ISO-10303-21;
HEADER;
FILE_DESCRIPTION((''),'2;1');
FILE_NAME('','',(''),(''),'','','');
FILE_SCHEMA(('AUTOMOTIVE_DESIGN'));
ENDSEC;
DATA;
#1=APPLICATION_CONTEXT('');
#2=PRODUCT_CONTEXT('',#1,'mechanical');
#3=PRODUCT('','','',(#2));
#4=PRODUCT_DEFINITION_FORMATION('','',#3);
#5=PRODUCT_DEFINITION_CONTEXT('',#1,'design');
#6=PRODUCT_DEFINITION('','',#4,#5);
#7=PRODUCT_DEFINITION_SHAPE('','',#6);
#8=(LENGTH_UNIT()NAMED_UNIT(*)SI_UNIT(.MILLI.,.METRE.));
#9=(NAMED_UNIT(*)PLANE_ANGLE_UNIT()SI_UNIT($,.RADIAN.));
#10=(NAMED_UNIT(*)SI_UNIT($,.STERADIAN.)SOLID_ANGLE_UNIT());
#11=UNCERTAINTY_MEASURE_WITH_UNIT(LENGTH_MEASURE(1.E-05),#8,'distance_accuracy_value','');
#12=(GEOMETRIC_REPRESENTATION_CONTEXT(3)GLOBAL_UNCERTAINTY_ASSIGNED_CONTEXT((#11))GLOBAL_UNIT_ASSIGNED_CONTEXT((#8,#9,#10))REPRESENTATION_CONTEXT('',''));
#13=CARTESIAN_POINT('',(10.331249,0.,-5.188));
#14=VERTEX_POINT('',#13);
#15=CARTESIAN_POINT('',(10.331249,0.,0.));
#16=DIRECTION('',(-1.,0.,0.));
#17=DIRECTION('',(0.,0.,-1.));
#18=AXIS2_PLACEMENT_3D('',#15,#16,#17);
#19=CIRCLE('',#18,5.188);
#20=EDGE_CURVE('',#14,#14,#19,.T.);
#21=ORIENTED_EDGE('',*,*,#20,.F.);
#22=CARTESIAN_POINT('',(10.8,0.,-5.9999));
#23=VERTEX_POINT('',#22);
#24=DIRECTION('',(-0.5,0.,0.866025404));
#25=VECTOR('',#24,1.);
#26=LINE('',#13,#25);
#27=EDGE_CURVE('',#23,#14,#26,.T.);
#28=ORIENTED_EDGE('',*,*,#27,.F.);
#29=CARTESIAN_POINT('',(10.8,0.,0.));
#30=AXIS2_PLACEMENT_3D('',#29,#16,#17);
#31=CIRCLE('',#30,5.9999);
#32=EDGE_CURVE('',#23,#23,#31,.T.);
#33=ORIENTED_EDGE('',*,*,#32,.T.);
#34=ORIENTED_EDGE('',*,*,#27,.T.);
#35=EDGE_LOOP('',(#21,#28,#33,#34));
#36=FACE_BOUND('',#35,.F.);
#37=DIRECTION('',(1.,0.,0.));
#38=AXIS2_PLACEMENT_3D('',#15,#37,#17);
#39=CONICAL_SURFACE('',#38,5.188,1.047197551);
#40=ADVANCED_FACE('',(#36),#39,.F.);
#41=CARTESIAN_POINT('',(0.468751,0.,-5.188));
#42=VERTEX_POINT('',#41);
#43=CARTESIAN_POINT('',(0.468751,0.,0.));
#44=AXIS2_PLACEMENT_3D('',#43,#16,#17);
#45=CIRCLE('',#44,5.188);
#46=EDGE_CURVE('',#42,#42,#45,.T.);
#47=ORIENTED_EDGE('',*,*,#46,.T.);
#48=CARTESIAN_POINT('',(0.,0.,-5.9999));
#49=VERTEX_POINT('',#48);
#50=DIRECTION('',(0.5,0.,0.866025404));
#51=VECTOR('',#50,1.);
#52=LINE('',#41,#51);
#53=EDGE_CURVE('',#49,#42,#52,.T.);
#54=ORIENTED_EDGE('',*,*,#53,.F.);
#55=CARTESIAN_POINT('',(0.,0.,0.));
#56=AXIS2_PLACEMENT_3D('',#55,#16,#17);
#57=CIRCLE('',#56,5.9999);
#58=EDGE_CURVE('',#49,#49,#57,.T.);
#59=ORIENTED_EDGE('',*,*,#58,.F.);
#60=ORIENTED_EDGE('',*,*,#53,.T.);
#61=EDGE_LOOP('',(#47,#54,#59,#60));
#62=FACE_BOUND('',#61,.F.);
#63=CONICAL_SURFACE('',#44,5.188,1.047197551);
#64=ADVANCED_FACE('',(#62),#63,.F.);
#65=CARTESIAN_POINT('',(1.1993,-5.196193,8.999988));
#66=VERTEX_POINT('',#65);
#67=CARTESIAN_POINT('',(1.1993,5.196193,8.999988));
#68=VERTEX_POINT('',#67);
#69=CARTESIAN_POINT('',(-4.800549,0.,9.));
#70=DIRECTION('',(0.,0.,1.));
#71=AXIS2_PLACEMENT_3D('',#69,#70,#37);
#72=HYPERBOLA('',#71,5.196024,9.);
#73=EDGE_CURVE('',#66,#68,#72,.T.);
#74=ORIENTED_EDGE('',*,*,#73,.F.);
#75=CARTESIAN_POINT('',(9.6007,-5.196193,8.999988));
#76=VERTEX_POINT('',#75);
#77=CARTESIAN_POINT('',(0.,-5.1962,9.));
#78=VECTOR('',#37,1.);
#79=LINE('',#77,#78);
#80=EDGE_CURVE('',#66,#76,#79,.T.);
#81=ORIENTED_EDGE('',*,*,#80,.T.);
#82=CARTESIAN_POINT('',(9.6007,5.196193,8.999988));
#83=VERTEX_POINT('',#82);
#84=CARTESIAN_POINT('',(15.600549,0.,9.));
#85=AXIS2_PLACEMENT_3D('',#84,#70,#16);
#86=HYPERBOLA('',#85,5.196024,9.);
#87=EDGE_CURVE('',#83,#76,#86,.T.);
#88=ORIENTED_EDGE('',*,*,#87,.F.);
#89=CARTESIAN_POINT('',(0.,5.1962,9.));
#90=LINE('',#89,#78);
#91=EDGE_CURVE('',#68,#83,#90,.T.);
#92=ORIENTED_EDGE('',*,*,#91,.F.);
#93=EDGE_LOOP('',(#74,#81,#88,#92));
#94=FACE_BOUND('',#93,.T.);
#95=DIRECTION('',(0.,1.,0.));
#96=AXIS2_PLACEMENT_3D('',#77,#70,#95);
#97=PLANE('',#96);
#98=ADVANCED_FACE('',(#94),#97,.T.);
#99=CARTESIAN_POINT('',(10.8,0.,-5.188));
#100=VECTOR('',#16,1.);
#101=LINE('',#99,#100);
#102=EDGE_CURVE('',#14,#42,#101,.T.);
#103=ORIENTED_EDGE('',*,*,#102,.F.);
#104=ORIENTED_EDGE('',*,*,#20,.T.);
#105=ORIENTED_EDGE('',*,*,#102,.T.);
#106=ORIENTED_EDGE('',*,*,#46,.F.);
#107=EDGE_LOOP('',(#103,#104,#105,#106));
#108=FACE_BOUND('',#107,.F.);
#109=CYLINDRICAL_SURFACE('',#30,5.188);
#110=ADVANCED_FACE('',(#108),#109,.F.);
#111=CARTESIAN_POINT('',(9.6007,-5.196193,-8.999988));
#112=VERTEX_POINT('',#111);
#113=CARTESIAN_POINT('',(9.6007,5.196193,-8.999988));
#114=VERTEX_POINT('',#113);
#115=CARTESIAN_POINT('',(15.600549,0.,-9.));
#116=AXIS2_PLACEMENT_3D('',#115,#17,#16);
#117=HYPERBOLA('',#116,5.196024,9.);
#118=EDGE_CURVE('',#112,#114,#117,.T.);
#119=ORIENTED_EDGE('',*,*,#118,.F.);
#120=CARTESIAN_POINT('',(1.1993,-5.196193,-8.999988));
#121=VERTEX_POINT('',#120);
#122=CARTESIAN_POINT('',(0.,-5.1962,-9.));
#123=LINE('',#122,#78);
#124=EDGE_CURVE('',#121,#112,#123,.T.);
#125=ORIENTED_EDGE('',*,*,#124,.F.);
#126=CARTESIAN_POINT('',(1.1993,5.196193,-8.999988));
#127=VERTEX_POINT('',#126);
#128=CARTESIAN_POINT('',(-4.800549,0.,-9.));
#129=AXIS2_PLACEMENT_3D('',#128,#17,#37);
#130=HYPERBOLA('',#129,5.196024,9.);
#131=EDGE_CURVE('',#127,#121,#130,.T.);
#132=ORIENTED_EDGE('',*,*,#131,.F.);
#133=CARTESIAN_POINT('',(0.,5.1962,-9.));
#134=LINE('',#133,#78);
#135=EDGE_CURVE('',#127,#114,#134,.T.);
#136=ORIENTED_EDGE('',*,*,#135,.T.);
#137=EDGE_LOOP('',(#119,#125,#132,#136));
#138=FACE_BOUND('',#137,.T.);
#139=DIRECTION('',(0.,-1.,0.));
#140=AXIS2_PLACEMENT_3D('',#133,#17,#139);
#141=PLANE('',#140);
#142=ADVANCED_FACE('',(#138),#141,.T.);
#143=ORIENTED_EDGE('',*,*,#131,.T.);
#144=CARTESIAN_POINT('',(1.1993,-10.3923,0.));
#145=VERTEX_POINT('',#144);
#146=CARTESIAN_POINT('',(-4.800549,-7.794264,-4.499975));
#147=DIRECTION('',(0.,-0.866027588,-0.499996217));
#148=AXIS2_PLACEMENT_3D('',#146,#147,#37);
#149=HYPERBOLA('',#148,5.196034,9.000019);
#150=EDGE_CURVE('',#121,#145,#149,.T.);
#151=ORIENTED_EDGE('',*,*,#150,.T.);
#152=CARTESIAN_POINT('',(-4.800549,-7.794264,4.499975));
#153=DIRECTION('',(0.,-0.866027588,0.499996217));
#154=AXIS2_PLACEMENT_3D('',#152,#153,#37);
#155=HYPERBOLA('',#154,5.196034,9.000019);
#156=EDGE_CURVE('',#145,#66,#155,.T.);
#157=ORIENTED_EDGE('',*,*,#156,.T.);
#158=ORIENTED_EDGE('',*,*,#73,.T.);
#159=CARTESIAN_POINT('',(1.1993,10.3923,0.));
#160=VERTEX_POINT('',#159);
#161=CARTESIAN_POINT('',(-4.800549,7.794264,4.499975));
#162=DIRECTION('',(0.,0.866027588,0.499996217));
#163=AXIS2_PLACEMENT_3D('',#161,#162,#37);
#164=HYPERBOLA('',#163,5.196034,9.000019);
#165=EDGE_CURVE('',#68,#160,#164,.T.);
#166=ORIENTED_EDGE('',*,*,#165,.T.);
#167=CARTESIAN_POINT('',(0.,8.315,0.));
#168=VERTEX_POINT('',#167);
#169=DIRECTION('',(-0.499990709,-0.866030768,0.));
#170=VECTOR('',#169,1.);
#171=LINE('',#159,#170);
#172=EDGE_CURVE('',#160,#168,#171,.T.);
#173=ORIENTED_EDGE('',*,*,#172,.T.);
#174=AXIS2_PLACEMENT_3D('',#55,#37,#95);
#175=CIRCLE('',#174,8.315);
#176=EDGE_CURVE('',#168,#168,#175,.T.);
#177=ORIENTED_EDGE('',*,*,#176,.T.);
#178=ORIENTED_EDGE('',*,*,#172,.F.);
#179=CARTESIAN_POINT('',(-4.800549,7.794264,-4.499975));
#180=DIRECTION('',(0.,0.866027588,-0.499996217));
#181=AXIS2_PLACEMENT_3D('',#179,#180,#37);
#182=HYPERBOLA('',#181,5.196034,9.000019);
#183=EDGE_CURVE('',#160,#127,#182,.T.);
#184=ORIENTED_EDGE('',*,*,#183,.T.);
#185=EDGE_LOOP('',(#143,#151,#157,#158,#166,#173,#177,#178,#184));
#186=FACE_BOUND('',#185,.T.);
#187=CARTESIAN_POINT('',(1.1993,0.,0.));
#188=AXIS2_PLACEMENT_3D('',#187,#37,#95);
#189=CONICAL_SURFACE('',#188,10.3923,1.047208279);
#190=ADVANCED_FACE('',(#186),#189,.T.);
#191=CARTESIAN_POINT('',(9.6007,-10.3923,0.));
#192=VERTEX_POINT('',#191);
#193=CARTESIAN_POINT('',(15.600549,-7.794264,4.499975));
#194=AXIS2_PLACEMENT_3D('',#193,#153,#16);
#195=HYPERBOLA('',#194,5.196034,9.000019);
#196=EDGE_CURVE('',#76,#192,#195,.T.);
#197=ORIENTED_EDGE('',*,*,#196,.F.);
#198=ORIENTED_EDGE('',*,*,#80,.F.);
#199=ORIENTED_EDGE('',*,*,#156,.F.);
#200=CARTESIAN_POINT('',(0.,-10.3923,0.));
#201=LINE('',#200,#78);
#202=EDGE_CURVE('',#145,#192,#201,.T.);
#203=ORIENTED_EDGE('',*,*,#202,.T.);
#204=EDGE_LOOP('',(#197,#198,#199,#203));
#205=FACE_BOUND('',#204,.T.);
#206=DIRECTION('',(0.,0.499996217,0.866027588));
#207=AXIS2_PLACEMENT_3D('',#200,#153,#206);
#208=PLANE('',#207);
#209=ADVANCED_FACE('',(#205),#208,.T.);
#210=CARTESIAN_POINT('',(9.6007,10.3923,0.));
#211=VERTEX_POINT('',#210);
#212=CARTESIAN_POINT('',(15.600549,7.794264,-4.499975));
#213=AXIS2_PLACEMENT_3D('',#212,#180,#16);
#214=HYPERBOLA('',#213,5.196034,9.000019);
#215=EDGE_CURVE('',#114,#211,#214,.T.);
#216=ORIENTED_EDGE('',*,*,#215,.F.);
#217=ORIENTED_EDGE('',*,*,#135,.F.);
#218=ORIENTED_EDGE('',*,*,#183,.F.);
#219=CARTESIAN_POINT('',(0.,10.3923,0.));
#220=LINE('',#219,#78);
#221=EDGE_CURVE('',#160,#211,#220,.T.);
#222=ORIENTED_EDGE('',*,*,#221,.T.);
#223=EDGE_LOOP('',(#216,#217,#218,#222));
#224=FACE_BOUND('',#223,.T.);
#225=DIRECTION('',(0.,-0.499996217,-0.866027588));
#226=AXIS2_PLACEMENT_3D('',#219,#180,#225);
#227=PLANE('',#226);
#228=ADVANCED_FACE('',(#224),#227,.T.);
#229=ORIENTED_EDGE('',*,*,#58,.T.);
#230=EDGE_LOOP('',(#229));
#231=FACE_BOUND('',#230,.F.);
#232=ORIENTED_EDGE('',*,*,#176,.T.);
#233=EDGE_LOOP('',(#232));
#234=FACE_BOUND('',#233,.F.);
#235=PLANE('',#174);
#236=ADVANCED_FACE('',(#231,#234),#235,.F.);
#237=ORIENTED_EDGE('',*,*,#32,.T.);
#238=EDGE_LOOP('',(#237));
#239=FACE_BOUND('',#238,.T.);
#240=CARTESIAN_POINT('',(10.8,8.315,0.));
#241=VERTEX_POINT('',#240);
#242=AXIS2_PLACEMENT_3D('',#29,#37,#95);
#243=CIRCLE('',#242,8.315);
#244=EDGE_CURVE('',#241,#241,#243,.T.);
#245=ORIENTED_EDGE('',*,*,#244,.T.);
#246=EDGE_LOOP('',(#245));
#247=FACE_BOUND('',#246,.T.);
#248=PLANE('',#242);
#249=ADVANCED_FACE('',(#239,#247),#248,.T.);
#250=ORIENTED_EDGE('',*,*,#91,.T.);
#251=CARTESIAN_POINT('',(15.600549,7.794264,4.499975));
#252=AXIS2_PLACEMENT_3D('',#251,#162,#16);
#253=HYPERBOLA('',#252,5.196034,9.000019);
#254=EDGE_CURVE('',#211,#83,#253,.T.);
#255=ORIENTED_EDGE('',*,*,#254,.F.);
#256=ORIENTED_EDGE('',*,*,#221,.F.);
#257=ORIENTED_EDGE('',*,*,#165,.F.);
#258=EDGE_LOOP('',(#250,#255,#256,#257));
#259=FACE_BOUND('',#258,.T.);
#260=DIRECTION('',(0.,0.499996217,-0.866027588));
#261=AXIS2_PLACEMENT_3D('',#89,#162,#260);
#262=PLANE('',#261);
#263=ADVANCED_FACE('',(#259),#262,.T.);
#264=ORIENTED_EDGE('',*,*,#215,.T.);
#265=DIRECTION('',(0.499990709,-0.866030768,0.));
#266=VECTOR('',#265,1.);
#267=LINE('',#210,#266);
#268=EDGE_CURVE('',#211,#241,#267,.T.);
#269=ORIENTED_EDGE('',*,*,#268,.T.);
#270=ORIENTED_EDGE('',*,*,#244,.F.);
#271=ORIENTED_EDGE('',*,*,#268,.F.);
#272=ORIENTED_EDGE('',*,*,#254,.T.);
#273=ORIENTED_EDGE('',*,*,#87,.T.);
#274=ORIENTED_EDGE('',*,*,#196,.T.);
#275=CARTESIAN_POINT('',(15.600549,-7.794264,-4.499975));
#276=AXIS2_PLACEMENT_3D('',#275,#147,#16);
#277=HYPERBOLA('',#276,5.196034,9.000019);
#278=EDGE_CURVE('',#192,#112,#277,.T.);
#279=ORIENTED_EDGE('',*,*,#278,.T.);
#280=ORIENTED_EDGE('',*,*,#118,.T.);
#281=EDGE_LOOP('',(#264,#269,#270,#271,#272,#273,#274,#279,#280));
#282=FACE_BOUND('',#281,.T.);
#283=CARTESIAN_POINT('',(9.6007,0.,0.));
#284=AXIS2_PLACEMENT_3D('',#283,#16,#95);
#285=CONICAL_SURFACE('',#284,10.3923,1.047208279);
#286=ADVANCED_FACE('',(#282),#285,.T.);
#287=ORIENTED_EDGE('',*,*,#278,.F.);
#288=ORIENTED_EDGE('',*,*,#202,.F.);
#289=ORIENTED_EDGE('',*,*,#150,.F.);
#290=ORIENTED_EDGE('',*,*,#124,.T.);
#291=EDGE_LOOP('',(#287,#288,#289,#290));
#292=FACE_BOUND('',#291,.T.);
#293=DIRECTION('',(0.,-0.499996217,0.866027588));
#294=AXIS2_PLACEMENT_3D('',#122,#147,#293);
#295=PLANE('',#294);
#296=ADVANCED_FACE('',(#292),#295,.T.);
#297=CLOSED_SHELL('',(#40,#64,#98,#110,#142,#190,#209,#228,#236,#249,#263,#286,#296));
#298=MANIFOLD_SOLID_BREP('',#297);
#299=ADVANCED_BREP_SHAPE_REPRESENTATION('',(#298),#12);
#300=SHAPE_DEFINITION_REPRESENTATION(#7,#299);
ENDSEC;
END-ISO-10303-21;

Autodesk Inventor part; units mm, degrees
ref_plane "YZ Plane" through (0, 0, 0) normal (1, 0, 0) x (0, 1, 0)
ref_plane "XZ Plane" through (0, 0, 0) normal (0, 1, 0) x (-1, 0, 0)
sketch "Эскиз1" plane through (0, 0, 0) normal (1, 0, 0) x (0, 1, 0)
  line L0 (-10.3923, 0) -> (-5.1962, 9)
  line L1 (-5.1962, 9) -> (5.1962, 9)
  line L2 (5.1962, 9) -> (10.3923, 0)
  line L3 (10.3923, 0) -> (5.1962, -9)
  line L4 (5.1962, -9) -> (-5.1962, -9)
  line L5 (-5.1962, -9) -> (-10.3923, 0)
  point P0 (0, 0)
  point P1 (0, 0)
  dimension "d0" = 20.7846
extrude "Базовый элемент" add sketch "Эскиз1" along normal blind 10.8
sketch "Эскиз2" plane through (0, 0, 0) normal (0, 0, 1) x (1, 0, 0)
  line L0 (0, 5.1962) -> (0, 10.3923) projected
  line L1 (0, 10.3923) -> (10.8, 10.3923) projected
  line L2 (10.8, 5.1962) -> (10.8, 10.3923) projected
  line L3 (-2.16, 0) -> (12.96, 0) projected
  line L4 (1.1993, 10.3923) -> (0, 8.315)
  line L5 (9.6007, 10.3923) -> (10.8, 8.315)
  dimension "d3" = 30
  dimension "d4" = 30
  dimension "d5" = 16.63
  dimension "d6" = 16.63
revolve "Фаска1" cut sketch "Эскиз2" angle 360 about axis through (-10, 0, 0) along (1, 0, 0)
sketch "Эскиз3" plane through (10.8, 0, 0) normal (1, 0, 0) x (0, 0, -1)
  arc A0 (-0.625, -1.0825) -> (0.625, -1.0825) centre (0, 0) ccw projected
hole "Резьба" at (10.8, 0, 0) direction (-1, 0, 0) diameter 10.376 end through all thread size "M12x1.5" class "6H" standard "ISO Metric profile"
chamfer "Фаска2" distance 0.8119 angle 30 1 edges at (10.8, 0, 5.188) measured on face at (10.8, 7.1795, -0.8718)
chamfer "Фаска3" distance 0.8119 angle 30 1 edges at (0, 0, 5.188) measured on face at (0, 7.1795, -0.8718)
ref_plane "Work Plane1" through (-18.9656, 0, 0) normal (0, -0.8660254, -0.5) x (1, 0, 0)
equation "\"d0\" = 1.1547 * SW"
equation "\"d1\" = KOH"
equation "\"d3\" = ANG1"
equation "\"d4\" = ANG2"
equation "\"d5\" = SW0"
equation "\"d6\" = SW01"
equation "\"d8\" = -0.5 * GD1 + 0.5 * NND"
equation "\"d40\" = -0.5 * GD1 + 0.5 * NND"
equation "\"d10\" = -0.5 * GD1 + 0.5 * NND"
equation "\"d41\" = -0.5 * GD1 + 0.5 * NND"
equation "\"ANG1\" = 30deg"
equation "\"ANG2\" = 30deg"
equation "\"NND\" = 12"
equation "\"KOH\" = 10.8"
equation "\"SW\" = 18"
equation "\"SW0\" = 16.63"
equation "\"SW01\" = SW0"
equation "\"GUL\" = 0.541266 * PTC"
equation "\"LADI\" = 12.345"
equation "\"TOA\" = 30deg"
equation "\"FAWI\" = 30deg"
equation "\"PTC\" = 1.5"
equation "\"THREADDIA\" = 12"
equation "\"E0\" = 1.155 * SW"
equation "\"GAL\" = 0.541266 * PTC"
equation "\"GD1\" = 10.376202"
properties part number "Копия гайки M12x1.5-6H ГОСТ 5915-70" material "Сталь, мягкая"
